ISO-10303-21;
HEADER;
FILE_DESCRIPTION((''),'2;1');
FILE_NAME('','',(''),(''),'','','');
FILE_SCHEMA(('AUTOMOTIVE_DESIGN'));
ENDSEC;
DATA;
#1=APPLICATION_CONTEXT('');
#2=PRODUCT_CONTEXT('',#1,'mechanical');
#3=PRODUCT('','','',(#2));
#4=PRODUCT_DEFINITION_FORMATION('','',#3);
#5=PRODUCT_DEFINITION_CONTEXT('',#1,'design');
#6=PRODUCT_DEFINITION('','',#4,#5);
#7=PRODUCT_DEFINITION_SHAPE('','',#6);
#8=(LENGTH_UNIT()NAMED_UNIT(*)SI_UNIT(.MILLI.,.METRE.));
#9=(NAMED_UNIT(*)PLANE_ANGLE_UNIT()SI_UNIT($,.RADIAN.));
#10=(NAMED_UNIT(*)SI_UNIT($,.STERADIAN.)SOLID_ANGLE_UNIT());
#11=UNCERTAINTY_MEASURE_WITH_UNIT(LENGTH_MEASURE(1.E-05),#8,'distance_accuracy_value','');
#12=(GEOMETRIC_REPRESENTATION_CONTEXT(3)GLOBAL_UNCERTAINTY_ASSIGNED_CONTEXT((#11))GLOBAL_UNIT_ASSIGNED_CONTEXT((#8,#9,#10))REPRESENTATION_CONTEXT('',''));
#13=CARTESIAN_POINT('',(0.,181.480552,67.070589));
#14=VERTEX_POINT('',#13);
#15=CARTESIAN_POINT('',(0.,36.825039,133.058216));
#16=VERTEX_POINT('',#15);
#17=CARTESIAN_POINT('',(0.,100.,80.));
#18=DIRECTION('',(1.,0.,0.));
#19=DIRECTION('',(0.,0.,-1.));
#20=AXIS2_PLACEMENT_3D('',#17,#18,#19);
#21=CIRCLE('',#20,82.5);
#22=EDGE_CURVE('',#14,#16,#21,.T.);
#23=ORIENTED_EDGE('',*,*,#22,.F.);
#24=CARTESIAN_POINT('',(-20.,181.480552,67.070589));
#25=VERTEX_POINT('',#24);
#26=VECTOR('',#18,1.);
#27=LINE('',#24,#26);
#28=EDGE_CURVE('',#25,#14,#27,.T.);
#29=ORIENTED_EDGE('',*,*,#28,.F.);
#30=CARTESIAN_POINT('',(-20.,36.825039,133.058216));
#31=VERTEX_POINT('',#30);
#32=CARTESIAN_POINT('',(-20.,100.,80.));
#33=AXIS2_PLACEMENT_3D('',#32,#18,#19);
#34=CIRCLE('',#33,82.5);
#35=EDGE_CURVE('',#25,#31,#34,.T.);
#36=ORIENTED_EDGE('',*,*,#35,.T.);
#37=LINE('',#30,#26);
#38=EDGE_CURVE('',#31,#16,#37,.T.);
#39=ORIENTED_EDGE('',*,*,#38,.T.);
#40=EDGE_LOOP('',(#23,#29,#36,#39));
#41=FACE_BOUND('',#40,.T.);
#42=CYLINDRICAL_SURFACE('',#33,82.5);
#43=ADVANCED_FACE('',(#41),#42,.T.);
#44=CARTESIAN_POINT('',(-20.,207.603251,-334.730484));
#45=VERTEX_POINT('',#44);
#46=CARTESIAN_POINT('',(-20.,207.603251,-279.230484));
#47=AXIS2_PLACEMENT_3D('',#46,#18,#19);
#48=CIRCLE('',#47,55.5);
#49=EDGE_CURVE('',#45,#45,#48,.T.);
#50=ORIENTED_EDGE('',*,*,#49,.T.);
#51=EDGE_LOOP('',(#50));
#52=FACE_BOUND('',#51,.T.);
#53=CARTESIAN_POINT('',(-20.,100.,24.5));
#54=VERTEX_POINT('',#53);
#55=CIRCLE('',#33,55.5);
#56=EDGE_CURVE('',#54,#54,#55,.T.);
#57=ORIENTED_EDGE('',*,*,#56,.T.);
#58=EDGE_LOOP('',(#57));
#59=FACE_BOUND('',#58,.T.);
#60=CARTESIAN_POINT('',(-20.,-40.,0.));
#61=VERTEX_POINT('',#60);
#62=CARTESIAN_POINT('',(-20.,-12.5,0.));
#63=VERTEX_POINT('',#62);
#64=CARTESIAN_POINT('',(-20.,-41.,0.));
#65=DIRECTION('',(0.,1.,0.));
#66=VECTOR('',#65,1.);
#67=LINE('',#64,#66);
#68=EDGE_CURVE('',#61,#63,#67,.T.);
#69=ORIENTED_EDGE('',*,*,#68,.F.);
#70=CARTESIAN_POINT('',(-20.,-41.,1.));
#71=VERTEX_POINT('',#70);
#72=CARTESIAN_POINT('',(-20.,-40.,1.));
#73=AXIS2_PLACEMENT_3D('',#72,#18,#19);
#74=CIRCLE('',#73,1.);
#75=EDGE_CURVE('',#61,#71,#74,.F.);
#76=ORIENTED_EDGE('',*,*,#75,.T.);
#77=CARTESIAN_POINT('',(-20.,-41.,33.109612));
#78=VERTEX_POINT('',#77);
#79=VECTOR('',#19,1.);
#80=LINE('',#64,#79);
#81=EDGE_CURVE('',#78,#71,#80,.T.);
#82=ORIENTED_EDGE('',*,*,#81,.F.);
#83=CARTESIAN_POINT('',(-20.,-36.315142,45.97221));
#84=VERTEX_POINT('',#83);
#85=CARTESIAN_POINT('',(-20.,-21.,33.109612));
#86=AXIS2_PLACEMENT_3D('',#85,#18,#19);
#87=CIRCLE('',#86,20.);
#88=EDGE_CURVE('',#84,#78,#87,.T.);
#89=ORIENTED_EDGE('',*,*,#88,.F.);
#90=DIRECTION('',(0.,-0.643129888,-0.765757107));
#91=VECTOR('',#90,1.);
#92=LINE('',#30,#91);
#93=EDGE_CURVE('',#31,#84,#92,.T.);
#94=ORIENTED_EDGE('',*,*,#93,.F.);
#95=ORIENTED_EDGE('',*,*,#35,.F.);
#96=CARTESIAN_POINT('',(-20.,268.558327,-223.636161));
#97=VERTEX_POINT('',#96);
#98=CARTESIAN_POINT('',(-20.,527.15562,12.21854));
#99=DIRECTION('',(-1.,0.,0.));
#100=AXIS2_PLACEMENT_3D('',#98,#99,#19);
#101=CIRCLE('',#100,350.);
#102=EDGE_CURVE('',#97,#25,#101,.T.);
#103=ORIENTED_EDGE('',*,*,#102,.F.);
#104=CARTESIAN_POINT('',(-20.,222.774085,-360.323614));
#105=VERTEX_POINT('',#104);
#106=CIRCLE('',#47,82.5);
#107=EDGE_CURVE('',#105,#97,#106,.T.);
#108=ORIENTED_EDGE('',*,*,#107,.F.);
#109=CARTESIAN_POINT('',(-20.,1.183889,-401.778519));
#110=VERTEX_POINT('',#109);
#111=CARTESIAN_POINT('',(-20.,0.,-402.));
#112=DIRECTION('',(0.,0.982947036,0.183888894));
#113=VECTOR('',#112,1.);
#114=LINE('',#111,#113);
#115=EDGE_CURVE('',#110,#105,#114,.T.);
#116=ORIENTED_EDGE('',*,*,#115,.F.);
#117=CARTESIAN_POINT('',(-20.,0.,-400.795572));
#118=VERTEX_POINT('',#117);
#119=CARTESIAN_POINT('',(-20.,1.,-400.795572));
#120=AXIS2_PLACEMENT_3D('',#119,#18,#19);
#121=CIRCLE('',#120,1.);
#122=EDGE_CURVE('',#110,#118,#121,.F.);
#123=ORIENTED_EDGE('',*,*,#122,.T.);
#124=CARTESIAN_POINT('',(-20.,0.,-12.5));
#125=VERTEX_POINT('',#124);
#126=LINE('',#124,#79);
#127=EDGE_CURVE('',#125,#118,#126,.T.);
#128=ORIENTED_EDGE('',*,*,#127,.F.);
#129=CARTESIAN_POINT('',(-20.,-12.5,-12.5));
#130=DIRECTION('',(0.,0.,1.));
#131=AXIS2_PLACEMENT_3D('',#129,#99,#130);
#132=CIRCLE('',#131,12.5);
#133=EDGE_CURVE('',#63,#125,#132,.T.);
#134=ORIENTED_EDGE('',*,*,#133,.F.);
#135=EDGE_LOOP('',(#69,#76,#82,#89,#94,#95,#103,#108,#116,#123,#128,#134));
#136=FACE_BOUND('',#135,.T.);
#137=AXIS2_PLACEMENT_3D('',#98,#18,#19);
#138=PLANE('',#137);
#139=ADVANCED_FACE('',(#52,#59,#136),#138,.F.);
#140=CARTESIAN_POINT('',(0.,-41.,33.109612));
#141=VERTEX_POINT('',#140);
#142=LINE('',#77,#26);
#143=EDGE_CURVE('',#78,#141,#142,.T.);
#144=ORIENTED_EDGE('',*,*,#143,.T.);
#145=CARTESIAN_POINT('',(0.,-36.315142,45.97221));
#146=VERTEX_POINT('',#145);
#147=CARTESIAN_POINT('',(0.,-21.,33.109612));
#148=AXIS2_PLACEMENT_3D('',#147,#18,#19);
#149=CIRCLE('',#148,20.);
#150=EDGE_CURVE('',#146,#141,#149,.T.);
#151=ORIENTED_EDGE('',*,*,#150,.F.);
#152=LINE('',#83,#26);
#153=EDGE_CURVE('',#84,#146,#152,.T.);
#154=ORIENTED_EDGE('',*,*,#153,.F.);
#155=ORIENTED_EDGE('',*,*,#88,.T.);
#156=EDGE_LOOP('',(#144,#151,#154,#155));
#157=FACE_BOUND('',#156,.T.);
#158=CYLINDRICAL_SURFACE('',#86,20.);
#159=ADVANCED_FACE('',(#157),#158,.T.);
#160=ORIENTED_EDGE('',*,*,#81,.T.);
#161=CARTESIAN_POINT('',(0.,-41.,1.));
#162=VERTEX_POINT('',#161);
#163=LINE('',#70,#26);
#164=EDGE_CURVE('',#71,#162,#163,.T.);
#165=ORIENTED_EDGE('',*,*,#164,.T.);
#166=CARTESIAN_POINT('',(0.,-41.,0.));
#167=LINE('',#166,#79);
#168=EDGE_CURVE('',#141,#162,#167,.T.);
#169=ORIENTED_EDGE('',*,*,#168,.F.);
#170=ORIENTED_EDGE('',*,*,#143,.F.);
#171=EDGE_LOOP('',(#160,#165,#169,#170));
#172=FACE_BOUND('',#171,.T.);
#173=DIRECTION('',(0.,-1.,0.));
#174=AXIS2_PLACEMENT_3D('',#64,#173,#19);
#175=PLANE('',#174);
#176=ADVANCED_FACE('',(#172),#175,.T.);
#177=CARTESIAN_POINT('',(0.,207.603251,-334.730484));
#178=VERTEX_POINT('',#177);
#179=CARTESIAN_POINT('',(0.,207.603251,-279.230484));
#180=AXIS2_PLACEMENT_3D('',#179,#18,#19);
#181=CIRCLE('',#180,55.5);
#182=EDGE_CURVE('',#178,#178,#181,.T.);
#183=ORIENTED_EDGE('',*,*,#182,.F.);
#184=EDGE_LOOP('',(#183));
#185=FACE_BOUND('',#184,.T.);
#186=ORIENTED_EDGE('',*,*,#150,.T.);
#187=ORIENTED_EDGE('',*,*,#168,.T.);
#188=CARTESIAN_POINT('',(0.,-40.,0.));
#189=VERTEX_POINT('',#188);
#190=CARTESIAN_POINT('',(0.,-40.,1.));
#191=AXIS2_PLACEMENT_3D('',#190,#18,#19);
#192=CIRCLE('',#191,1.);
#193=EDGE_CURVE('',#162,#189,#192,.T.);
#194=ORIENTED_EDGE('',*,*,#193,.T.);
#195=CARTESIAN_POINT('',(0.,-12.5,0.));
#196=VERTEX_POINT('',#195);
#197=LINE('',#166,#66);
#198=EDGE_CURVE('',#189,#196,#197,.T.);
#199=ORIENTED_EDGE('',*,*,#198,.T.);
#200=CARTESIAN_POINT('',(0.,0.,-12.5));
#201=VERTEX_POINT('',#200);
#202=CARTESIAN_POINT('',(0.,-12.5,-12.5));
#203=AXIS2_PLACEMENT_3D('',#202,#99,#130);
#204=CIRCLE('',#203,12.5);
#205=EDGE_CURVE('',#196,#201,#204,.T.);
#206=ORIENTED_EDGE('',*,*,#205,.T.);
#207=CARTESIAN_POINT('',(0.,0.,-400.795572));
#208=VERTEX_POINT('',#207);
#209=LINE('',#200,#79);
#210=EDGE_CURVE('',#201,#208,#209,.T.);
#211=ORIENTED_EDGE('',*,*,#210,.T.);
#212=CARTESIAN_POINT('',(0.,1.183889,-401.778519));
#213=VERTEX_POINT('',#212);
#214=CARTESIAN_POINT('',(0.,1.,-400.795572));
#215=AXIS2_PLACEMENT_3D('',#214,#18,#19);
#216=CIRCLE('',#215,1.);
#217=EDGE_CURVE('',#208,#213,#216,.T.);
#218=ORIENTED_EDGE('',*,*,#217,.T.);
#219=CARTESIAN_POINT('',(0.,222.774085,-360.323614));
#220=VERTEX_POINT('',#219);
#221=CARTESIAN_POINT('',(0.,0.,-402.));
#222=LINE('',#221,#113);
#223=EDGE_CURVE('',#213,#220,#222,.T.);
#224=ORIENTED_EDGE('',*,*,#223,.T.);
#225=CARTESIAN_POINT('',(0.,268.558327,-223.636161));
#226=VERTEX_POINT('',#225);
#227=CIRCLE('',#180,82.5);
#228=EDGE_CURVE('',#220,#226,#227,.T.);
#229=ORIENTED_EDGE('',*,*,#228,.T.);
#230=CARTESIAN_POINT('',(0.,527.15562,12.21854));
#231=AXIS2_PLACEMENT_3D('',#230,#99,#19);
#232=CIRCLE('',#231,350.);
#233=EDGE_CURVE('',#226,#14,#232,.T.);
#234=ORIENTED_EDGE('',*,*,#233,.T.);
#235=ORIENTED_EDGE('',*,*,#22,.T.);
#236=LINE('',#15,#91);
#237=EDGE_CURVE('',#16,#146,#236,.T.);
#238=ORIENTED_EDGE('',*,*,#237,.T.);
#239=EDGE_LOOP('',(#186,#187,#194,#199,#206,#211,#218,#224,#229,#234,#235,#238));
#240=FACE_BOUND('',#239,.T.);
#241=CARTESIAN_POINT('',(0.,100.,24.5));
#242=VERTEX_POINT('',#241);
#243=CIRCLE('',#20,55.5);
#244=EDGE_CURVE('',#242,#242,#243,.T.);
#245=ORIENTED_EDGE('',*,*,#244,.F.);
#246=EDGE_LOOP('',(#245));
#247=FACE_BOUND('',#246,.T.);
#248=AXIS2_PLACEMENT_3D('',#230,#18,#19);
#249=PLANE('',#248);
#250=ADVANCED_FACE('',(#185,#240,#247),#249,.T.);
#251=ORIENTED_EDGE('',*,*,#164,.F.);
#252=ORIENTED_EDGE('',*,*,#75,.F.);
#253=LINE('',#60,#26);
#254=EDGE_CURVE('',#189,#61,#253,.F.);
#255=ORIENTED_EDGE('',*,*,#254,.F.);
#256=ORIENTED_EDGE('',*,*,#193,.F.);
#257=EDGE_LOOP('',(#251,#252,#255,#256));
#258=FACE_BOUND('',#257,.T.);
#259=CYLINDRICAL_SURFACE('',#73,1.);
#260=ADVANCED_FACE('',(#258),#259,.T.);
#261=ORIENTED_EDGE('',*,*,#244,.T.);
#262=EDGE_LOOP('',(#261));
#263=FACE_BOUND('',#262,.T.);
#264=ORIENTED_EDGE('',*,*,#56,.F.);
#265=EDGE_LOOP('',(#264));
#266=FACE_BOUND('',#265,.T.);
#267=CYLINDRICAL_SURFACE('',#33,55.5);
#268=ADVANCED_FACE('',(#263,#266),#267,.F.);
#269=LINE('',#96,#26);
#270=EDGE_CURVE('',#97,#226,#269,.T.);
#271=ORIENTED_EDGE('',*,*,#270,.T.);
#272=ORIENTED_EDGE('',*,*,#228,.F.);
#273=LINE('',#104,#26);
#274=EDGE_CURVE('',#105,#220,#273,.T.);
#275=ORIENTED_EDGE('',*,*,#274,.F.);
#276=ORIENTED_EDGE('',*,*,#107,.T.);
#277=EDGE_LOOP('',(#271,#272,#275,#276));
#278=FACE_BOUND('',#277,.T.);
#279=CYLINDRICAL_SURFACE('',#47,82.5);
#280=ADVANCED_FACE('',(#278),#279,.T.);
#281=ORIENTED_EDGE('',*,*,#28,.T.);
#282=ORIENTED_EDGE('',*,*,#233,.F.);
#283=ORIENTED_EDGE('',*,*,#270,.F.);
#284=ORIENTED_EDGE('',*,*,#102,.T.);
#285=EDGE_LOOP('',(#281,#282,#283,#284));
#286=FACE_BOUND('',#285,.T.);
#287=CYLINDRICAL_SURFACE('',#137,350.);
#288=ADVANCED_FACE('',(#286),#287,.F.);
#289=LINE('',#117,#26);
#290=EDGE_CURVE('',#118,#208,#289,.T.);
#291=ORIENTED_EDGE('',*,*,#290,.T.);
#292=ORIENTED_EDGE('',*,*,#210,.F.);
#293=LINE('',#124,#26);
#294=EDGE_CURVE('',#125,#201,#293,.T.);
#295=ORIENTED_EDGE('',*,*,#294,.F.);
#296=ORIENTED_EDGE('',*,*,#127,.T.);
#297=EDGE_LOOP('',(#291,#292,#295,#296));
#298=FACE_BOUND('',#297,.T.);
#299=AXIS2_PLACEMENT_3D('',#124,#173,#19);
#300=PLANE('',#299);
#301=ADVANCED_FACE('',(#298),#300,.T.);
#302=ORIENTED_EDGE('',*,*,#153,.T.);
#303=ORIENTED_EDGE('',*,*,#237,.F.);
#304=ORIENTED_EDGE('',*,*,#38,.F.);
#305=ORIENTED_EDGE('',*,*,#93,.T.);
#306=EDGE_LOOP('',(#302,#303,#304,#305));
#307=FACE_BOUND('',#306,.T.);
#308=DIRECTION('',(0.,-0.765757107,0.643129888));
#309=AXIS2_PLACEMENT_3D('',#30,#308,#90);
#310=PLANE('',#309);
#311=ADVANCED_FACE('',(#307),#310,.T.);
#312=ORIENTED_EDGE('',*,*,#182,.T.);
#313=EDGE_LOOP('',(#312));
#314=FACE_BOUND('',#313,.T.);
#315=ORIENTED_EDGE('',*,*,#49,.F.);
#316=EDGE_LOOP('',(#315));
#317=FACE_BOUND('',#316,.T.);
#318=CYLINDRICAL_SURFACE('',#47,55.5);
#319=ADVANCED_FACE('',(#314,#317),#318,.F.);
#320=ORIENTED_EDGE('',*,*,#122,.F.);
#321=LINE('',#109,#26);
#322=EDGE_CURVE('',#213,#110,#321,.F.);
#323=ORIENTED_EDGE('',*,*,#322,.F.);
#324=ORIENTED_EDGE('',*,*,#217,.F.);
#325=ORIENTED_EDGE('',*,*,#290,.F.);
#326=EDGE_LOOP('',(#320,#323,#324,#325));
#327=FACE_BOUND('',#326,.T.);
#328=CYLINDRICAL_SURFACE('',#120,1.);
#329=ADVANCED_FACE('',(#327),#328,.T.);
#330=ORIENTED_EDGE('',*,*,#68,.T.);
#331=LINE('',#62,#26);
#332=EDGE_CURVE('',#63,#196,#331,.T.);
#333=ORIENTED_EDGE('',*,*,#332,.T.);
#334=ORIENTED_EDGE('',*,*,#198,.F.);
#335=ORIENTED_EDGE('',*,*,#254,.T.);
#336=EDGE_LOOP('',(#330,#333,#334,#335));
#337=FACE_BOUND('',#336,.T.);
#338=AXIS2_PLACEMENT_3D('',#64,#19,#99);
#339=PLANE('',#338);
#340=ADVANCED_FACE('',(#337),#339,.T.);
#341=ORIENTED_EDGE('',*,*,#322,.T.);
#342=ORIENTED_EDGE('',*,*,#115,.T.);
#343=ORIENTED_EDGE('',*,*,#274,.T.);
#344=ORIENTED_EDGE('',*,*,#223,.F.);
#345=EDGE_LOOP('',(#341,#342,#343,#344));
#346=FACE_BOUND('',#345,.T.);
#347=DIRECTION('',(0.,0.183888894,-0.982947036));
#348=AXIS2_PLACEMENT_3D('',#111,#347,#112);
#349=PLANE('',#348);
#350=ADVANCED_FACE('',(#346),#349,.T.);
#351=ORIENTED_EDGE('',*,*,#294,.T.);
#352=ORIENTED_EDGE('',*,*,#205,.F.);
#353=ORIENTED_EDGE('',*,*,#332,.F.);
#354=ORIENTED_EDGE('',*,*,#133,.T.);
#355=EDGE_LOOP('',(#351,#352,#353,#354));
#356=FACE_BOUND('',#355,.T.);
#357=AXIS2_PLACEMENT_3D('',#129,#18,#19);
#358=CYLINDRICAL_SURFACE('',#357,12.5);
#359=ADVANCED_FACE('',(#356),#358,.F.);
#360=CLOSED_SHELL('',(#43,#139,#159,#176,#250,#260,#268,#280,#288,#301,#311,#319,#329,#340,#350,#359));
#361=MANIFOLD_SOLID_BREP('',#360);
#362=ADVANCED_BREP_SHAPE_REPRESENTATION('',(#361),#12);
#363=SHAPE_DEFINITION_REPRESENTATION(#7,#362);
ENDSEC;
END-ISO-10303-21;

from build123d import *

# Parameters (mm, degrees)
SKETCH1_R          = 55.5
BASE_FLANGE1_DEPTH = 20
FILLET_1_0_R       = 1


# Sheet-metal steps are written as plain solids
with BuildPart() as part:
    # Sketch1 → Base-Flange1 (new body)
    with BuildSketch(Plane(origin=(0, 0, 0), x_dir=(0, 0, -1), z_dir=(1, 0, 0))):
        with BuildLine():
            Line((0, -41), (0, -12.5))
            ThreePointArc((0, -12.5), (3.661165235, -3.661165235), (12.5, 0))
            Line((12.5, 0), (402, 0))
            Line((402, 0), (360.323614104, 222.774084629))
            ThreePointArc((360.323614104, 222.774084629), (305.433470455, 285.831465011), (223.63616123, 268.558327081))
            ThreePointArc((223.63616123, 268.558327081), (88.211160813, 191.873835227), (-67.07058856, 181.480551789))
            ThreePointArc((-67.07058856, 181.480551789), (-155.059207322, 134.23982179), (-133.058215758, 36.825038658))
            Line((-133.058215758, 36.825038658), (-45.972209781, -36.315142143))
            ThreePointArc((-45.972209781, -36.315142143), (-39.95421417, -39.792323471), (-33.109612021, -41))
            Line((-33.109612021, -41), (0, -41))
        make_face()
        with Locations((-80, 100)):
            Circle(SKETCH1_R, mode=Mode.SUBTRACT)
        with Locations((279.230483668, 207.603250897)):
            Circle(SKETCH1_R, mode=Mode.SUBTRACT)
    extrude(amount=-BASE_FLANGE1_DEPTH)

    # Fillet-1.0
    fillet_1_0_edges = [part.edges().sort_by_distance(p)[0] for p in [
        (-10, 0, -402),
        (-10, -41, 0),
    ]]
    fillet(fillet_1_0_edges, radius=FILLET_1_0_R)


solid = part.part
